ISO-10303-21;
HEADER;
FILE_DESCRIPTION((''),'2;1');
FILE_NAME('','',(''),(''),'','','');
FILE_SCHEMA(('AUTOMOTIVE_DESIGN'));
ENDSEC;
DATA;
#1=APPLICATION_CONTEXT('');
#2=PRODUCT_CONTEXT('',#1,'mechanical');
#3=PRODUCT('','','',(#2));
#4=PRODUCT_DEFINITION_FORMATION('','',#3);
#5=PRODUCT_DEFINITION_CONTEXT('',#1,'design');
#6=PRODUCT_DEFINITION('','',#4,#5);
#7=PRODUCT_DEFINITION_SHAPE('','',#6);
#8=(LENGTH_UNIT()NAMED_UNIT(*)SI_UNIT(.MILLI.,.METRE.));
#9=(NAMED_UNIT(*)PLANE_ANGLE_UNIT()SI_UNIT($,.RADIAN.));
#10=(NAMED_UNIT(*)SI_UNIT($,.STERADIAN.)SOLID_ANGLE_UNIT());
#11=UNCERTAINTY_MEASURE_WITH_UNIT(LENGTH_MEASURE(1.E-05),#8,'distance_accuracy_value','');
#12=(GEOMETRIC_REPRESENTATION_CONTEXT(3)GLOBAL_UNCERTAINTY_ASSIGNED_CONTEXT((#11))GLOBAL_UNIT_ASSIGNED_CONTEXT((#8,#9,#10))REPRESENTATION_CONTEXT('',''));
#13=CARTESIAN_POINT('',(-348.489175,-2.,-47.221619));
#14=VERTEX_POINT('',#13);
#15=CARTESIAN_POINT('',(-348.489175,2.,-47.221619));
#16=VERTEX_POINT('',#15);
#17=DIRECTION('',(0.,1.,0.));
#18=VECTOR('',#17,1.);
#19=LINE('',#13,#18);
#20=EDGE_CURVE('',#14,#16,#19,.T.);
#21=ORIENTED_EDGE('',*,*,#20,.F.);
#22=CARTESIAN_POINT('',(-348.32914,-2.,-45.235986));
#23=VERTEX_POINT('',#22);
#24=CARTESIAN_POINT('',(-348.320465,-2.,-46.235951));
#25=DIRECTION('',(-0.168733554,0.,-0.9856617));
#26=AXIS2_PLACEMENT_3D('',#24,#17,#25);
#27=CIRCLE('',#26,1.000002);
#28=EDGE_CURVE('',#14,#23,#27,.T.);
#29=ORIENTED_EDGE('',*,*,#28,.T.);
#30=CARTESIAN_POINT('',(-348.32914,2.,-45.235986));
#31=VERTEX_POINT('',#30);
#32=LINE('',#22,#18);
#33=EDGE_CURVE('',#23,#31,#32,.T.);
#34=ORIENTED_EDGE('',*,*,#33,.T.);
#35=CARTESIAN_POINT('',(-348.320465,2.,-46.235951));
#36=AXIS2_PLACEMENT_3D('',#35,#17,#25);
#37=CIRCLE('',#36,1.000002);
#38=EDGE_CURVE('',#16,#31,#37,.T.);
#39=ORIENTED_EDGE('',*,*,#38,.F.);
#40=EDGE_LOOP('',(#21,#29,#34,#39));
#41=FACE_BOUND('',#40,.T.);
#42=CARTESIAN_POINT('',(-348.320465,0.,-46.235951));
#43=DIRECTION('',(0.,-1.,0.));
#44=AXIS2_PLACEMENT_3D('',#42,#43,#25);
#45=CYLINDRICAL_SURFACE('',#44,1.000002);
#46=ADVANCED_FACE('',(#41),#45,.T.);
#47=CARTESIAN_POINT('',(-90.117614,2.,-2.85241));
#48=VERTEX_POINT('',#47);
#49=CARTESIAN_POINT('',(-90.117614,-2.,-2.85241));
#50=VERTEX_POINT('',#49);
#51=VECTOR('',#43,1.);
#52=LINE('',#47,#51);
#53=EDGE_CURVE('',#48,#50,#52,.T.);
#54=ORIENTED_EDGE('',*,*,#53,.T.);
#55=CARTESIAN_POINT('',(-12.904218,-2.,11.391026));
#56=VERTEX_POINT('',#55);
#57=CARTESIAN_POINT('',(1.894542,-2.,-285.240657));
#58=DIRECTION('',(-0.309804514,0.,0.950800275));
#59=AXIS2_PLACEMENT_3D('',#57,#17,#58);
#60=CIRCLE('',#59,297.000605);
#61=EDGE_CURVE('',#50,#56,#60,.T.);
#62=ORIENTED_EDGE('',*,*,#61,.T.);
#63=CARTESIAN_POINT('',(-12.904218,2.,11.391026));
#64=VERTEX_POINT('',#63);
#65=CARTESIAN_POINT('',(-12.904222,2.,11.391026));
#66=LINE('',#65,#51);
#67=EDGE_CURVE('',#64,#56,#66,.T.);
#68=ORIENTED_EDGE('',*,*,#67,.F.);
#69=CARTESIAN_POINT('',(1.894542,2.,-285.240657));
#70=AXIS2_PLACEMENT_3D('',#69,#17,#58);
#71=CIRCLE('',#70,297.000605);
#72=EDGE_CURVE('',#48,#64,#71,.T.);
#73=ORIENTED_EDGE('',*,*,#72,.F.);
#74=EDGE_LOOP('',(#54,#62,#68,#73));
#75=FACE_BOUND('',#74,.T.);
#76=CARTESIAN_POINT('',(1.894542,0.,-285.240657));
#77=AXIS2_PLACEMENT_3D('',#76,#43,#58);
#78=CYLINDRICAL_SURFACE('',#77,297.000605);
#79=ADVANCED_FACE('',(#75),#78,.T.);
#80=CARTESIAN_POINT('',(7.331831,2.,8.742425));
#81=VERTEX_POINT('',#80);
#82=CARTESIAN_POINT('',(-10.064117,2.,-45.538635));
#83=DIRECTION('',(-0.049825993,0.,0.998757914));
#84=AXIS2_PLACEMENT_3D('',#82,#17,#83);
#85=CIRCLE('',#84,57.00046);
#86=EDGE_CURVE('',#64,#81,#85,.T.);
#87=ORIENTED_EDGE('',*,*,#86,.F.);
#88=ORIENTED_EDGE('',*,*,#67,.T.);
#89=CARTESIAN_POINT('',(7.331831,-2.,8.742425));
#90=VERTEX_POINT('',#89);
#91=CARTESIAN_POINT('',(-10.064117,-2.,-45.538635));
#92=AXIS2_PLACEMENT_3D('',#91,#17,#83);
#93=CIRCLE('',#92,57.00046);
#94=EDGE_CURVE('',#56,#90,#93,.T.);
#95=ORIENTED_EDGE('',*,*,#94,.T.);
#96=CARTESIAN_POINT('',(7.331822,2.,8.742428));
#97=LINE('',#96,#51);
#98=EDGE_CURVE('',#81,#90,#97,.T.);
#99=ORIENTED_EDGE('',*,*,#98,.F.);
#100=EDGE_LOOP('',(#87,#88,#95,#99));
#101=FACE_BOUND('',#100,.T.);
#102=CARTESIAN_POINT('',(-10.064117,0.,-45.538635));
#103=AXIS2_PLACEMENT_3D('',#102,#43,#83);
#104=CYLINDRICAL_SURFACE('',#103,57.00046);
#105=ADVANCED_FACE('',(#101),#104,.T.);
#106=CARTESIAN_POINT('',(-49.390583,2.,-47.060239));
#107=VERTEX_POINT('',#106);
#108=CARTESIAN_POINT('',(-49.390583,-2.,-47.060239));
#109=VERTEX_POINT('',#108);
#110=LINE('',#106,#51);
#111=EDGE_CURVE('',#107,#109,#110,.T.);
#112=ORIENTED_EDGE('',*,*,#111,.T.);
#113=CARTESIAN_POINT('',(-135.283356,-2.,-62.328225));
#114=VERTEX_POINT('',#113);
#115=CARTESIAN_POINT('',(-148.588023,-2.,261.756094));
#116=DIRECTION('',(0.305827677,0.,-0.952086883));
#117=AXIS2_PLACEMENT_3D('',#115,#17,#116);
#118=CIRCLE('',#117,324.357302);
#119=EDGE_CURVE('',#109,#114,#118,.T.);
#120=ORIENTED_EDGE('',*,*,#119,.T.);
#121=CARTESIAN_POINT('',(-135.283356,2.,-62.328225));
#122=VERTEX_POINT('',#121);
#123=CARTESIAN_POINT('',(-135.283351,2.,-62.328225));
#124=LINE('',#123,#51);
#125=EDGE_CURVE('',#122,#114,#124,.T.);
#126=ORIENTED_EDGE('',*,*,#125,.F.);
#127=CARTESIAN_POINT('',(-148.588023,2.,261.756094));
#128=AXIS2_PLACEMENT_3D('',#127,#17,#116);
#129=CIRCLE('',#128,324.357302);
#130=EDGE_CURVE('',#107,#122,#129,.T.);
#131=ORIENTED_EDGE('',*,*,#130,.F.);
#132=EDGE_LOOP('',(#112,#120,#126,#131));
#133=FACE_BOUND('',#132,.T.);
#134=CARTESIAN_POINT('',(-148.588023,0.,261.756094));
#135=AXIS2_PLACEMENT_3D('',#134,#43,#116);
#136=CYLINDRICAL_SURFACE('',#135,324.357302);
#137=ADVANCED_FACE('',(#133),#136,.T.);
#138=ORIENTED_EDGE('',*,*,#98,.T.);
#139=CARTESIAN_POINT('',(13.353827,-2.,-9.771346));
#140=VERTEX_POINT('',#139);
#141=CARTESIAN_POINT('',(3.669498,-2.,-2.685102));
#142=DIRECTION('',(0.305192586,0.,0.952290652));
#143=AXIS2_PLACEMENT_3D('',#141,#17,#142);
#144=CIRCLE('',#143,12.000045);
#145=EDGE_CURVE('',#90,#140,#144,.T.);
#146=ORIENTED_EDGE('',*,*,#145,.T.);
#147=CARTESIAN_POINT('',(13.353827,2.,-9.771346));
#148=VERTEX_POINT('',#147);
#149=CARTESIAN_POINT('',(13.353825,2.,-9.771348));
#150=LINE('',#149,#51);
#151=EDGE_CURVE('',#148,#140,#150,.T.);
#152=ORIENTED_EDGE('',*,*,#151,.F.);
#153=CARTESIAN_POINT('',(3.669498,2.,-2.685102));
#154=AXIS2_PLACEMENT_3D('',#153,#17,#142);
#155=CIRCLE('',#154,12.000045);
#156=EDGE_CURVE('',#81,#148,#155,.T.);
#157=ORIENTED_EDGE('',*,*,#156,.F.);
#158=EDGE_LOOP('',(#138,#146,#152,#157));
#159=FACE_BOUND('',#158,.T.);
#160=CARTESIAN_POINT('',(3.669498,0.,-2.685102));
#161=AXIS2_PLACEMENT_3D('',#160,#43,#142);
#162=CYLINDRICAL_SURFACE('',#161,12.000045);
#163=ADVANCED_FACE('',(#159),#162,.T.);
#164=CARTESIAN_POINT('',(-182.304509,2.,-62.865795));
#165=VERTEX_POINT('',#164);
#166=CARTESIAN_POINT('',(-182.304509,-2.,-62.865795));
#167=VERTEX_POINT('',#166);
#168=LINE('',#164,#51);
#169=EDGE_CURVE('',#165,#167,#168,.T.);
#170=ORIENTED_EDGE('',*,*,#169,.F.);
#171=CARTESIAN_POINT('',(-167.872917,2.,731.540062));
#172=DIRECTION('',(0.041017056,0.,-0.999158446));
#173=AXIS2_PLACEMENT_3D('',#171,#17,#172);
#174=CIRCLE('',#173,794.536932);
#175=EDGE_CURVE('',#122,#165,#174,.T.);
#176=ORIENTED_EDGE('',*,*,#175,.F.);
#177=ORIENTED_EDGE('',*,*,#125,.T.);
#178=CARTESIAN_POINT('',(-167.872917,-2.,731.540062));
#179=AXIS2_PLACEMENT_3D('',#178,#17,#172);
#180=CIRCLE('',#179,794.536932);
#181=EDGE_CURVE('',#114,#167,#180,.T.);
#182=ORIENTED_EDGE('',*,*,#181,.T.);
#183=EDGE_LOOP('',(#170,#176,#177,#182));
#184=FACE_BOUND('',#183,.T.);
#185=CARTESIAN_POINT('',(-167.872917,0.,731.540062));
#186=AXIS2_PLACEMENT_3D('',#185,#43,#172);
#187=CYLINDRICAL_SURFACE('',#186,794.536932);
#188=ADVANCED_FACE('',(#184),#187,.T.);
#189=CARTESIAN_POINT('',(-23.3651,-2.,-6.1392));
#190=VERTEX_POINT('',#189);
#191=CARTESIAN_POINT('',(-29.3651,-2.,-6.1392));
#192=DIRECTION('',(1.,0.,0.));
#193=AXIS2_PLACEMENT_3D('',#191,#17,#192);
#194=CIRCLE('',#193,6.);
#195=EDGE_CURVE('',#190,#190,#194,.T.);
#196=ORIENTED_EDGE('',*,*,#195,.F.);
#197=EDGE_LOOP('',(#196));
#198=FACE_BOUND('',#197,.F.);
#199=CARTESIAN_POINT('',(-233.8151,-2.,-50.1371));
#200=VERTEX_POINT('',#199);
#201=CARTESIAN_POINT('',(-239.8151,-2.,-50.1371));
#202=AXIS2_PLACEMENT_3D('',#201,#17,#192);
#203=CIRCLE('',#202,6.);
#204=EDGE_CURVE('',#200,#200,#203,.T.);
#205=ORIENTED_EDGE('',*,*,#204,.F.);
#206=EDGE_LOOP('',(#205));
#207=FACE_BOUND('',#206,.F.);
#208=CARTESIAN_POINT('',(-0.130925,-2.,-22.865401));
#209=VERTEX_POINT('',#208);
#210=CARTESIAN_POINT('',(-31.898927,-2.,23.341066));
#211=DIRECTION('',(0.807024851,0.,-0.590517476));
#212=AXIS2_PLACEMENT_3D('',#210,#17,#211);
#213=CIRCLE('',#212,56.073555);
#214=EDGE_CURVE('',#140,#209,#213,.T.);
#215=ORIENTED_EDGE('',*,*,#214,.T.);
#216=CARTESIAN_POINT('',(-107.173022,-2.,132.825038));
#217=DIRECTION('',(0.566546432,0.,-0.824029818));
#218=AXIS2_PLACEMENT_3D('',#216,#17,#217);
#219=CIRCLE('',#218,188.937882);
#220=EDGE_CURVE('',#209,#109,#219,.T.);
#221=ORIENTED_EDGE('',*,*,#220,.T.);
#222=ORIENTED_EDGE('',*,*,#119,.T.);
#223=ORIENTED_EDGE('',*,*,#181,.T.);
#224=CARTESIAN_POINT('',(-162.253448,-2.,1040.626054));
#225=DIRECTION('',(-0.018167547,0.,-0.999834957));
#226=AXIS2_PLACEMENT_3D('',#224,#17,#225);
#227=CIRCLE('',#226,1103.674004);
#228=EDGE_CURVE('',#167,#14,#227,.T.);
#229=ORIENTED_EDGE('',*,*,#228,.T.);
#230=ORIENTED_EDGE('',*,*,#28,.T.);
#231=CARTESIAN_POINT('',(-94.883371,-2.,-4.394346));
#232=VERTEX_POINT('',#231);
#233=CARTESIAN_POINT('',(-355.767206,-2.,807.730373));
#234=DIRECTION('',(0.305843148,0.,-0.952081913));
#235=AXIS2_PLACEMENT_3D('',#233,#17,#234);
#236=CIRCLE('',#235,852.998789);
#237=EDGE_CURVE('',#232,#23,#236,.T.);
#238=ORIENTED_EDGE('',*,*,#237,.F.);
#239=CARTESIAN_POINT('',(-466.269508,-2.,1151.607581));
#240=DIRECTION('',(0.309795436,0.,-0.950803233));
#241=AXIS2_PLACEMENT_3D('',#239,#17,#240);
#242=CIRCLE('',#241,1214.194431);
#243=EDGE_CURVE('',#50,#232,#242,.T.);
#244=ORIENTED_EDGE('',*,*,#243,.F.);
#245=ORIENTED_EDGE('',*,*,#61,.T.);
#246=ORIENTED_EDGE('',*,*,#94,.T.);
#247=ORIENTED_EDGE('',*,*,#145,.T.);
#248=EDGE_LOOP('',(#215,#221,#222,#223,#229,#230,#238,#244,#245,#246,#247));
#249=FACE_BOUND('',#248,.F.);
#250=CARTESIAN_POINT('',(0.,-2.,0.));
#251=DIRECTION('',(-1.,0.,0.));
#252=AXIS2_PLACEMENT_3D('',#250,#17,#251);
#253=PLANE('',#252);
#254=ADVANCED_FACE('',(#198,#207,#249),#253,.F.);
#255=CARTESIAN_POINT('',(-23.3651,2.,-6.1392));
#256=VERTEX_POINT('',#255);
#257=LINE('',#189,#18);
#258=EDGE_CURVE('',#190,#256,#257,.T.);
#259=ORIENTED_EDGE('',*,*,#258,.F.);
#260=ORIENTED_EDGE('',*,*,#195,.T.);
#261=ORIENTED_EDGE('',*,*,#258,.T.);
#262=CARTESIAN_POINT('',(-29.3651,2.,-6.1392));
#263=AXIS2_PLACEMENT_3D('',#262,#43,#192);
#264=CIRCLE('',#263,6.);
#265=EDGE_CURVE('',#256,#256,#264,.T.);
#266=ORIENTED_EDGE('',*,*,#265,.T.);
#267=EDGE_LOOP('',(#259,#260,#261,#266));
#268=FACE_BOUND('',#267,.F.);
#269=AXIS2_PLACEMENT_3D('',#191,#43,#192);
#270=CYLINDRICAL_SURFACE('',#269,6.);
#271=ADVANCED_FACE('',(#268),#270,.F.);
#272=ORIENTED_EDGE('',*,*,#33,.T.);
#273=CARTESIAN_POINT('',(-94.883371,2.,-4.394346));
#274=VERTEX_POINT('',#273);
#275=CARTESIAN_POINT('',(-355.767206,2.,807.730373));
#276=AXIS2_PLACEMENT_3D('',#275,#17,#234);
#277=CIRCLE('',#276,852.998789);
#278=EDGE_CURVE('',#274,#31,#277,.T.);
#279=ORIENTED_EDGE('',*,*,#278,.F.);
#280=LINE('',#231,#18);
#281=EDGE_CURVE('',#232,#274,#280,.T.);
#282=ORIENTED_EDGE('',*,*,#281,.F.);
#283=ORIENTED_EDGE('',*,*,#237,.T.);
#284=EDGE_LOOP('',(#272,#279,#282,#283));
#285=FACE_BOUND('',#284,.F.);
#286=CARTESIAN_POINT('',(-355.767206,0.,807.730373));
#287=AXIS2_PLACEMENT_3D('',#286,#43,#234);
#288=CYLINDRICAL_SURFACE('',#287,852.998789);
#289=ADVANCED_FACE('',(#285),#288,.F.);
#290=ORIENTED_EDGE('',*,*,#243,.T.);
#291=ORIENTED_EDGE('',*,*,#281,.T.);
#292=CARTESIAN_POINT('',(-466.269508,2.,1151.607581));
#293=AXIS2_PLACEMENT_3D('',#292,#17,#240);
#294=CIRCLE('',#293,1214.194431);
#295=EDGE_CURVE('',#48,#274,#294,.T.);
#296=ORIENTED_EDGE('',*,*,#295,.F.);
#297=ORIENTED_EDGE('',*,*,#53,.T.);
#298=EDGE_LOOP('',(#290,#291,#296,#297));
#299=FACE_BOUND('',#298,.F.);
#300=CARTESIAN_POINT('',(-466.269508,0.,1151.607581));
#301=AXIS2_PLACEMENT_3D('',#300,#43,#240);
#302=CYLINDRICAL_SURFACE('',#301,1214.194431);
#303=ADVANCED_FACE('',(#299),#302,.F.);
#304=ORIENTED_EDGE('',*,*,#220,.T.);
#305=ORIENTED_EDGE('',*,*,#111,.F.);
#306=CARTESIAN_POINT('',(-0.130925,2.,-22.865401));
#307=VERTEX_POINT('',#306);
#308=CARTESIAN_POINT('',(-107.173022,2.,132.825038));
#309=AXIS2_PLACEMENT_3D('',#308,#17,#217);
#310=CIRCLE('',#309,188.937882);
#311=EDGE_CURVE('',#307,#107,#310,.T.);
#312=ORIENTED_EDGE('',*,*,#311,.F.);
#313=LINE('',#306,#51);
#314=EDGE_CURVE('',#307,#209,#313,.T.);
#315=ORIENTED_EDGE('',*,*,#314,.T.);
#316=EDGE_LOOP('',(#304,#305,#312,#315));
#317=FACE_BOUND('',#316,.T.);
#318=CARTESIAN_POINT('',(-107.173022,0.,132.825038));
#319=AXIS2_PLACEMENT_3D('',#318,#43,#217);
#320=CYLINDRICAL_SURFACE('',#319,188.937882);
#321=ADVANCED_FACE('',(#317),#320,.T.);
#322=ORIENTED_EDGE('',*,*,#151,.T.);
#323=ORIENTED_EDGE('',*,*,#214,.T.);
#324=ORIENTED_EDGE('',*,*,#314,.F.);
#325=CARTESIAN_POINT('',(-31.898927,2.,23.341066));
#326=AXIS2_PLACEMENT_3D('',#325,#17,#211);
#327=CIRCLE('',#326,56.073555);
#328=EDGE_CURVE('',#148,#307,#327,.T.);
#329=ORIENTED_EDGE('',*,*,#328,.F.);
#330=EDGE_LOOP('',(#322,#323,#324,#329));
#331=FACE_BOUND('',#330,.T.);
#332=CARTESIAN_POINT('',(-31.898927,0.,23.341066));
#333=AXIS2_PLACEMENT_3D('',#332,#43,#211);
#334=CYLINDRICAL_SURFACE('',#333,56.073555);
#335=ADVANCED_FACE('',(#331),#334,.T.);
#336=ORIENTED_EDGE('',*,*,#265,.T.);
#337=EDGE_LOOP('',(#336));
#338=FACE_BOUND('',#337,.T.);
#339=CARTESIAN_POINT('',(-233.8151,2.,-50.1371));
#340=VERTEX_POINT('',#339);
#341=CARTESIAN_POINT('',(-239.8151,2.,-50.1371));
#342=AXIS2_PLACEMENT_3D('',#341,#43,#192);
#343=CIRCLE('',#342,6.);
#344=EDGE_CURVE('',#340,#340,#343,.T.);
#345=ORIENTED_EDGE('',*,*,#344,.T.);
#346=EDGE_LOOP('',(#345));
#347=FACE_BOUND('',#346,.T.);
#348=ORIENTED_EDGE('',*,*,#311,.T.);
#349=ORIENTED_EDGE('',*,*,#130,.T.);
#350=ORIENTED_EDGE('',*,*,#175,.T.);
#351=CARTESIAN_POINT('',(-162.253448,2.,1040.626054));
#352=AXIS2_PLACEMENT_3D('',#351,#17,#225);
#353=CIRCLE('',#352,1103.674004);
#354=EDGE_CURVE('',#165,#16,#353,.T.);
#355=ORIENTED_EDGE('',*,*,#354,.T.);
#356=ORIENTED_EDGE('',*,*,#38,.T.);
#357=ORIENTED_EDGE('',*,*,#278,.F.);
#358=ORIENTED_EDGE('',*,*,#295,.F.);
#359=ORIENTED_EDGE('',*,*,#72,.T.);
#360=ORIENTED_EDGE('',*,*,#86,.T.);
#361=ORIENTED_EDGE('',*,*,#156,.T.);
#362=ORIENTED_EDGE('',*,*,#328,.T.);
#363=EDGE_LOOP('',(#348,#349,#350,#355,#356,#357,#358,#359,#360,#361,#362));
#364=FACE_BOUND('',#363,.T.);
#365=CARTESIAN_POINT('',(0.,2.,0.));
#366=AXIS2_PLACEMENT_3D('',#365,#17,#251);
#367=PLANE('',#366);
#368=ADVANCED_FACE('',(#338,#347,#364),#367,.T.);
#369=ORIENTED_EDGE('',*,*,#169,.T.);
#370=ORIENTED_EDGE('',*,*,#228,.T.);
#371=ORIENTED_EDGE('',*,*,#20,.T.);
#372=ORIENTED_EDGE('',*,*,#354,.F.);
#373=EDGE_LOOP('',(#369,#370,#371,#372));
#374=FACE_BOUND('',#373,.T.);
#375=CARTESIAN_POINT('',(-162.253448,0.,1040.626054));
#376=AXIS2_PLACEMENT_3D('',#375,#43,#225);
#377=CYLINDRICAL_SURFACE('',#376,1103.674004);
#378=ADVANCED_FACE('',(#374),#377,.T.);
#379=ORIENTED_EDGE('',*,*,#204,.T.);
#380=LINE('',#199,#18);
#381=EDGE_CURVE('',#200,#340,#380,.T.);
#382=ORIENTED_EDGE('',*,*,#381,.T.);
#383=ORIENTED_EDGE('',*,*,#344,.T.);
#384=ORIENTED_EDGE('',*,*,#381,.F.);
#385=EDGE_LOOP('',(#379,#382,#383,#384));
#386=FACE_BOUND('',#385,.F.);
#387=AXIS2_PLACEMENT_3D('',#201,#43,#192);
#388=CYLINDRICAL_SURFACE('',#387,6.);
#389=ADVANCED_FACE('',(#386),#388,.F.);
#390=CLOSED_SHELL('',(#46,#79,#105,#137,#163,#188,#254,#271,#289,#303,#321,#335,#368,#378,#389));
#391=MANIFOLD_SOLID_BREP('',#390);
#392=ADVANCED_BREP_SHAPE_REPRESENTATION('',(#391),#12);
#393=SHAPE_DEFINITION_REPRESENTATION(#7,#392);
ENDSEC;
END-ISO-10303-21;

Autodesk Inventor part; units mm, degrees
ref_plane "YZ Plane" through (0, 0, 0) normal (1, 0, 0) x (0, 1, 0)
ref_plane "XZ Plane" through (0, 0, 0) normal (0, 1, 0) x (-1, 0, 0)
ref_plane "XY Plane" through (0, 0, 0) normal (0, 0, 1) x (1, 0, 0)
sketch "スケッチ1" plane through (0, 0, 0) normal (0, 1, 0) x (-1, 0, 0)
  arc A0 (348.9954, -50.1786) -> (348.3553, -42.2361) centre (348.3204, -46.2359) ccw projected
  arc A1 (182.359, -65.8653) -> (348.9954, -50.1786) centre (162.2533, 1040.6287) ccw projected
  arc A2 (135.1603, -65.3257) -> (182.359, -65.8653) centre (167.871, 731.467) ccw projected
  arc A3 (48.4731, -49.9165) -> (135.1603, -65.3257) centre (148.588, 261.756) ccw projected
  arc A4 (-1.5687, -25.3375) -> (48.4731, -49.9165) centre (107.173, 132.825) ccw projected
  arc A5 (-15.7749, -11.5429) -> (-1.5687, -25.3375) centre (31.9, 23.342) ccw projected
  arc A6 (-8.2474, 11.5993) -> (-15.7749, -11.5429) centre (-3.6695, -2.6851) ccw projected
  arc A7 (13.0537, 14.3873) -> (-8.2474, 11.5993) centre (10.0641, -45.5382) ccw projected
  arc A8 (91.047, 0) -> (13.0537, 14.3873) centre (-1.8944, -285.2401) ccw projected
  arc A9 (91.047, 0) -> (95.8009, -1.5381) centre (462.8125, 1140.9603) ccw projected
  arc A10 (95.8009, -1.5381) -> (348.3553, -42.2361) centre (355.7675, 807.7316) ccw projected
  point P0 (0, 0)
extrude "押し出し1" add sketch "スケッチ1" along normal mid plane 4
sketch "スケッチ2" plane through (0, -2, 0) normal (0, -1, 0) x (1, 0, 0)
  line L0 (0, 0) -> (-283.8627, -59.346)
  arc A0 (-348.9954, -50.1786) -> (-182.359, -65.8653) centre (-162.2533, 1040.6287) ccw projected
  circle A1 centre (-29.3651, -6.1392) radius 6
  circle A2 centre (-239.8151, -50.1371) radius 6
  dimension "d3" = 290
  dimension "d4" = 12
  dimension "d5" = 12
  dimension "d6" = 30
  dimension "d7" = 215
extrude "押し出し2" cut sketch "スケッチ2" against normal through all
thicken "厚み1" operation cut thickness 3 both sides no extend neighbours no toward (0.1519877, 0, -0.9883824) faces at (-226.5779, 0.6667, -32.3934) (-92.1028, 0.6667, -0.3435) (-19.6698, -0.6667, 13.9839) (-3.4686, 0.6667, 14.0982) (9.3583, 0.6667, 11.1943) (14.4364, 0.6667, -13.3021) (-19.7763, 0.6667, -38.0608) (-76.8673, 0.6667, -57.648) (-177.1142, -0.6667, -65.9433) (-238.1449, 0.6667, -63.4427) (-351.8388, 0.6667, -48.1388)
properties part number "flap_m" material "木材 (オーク)"
